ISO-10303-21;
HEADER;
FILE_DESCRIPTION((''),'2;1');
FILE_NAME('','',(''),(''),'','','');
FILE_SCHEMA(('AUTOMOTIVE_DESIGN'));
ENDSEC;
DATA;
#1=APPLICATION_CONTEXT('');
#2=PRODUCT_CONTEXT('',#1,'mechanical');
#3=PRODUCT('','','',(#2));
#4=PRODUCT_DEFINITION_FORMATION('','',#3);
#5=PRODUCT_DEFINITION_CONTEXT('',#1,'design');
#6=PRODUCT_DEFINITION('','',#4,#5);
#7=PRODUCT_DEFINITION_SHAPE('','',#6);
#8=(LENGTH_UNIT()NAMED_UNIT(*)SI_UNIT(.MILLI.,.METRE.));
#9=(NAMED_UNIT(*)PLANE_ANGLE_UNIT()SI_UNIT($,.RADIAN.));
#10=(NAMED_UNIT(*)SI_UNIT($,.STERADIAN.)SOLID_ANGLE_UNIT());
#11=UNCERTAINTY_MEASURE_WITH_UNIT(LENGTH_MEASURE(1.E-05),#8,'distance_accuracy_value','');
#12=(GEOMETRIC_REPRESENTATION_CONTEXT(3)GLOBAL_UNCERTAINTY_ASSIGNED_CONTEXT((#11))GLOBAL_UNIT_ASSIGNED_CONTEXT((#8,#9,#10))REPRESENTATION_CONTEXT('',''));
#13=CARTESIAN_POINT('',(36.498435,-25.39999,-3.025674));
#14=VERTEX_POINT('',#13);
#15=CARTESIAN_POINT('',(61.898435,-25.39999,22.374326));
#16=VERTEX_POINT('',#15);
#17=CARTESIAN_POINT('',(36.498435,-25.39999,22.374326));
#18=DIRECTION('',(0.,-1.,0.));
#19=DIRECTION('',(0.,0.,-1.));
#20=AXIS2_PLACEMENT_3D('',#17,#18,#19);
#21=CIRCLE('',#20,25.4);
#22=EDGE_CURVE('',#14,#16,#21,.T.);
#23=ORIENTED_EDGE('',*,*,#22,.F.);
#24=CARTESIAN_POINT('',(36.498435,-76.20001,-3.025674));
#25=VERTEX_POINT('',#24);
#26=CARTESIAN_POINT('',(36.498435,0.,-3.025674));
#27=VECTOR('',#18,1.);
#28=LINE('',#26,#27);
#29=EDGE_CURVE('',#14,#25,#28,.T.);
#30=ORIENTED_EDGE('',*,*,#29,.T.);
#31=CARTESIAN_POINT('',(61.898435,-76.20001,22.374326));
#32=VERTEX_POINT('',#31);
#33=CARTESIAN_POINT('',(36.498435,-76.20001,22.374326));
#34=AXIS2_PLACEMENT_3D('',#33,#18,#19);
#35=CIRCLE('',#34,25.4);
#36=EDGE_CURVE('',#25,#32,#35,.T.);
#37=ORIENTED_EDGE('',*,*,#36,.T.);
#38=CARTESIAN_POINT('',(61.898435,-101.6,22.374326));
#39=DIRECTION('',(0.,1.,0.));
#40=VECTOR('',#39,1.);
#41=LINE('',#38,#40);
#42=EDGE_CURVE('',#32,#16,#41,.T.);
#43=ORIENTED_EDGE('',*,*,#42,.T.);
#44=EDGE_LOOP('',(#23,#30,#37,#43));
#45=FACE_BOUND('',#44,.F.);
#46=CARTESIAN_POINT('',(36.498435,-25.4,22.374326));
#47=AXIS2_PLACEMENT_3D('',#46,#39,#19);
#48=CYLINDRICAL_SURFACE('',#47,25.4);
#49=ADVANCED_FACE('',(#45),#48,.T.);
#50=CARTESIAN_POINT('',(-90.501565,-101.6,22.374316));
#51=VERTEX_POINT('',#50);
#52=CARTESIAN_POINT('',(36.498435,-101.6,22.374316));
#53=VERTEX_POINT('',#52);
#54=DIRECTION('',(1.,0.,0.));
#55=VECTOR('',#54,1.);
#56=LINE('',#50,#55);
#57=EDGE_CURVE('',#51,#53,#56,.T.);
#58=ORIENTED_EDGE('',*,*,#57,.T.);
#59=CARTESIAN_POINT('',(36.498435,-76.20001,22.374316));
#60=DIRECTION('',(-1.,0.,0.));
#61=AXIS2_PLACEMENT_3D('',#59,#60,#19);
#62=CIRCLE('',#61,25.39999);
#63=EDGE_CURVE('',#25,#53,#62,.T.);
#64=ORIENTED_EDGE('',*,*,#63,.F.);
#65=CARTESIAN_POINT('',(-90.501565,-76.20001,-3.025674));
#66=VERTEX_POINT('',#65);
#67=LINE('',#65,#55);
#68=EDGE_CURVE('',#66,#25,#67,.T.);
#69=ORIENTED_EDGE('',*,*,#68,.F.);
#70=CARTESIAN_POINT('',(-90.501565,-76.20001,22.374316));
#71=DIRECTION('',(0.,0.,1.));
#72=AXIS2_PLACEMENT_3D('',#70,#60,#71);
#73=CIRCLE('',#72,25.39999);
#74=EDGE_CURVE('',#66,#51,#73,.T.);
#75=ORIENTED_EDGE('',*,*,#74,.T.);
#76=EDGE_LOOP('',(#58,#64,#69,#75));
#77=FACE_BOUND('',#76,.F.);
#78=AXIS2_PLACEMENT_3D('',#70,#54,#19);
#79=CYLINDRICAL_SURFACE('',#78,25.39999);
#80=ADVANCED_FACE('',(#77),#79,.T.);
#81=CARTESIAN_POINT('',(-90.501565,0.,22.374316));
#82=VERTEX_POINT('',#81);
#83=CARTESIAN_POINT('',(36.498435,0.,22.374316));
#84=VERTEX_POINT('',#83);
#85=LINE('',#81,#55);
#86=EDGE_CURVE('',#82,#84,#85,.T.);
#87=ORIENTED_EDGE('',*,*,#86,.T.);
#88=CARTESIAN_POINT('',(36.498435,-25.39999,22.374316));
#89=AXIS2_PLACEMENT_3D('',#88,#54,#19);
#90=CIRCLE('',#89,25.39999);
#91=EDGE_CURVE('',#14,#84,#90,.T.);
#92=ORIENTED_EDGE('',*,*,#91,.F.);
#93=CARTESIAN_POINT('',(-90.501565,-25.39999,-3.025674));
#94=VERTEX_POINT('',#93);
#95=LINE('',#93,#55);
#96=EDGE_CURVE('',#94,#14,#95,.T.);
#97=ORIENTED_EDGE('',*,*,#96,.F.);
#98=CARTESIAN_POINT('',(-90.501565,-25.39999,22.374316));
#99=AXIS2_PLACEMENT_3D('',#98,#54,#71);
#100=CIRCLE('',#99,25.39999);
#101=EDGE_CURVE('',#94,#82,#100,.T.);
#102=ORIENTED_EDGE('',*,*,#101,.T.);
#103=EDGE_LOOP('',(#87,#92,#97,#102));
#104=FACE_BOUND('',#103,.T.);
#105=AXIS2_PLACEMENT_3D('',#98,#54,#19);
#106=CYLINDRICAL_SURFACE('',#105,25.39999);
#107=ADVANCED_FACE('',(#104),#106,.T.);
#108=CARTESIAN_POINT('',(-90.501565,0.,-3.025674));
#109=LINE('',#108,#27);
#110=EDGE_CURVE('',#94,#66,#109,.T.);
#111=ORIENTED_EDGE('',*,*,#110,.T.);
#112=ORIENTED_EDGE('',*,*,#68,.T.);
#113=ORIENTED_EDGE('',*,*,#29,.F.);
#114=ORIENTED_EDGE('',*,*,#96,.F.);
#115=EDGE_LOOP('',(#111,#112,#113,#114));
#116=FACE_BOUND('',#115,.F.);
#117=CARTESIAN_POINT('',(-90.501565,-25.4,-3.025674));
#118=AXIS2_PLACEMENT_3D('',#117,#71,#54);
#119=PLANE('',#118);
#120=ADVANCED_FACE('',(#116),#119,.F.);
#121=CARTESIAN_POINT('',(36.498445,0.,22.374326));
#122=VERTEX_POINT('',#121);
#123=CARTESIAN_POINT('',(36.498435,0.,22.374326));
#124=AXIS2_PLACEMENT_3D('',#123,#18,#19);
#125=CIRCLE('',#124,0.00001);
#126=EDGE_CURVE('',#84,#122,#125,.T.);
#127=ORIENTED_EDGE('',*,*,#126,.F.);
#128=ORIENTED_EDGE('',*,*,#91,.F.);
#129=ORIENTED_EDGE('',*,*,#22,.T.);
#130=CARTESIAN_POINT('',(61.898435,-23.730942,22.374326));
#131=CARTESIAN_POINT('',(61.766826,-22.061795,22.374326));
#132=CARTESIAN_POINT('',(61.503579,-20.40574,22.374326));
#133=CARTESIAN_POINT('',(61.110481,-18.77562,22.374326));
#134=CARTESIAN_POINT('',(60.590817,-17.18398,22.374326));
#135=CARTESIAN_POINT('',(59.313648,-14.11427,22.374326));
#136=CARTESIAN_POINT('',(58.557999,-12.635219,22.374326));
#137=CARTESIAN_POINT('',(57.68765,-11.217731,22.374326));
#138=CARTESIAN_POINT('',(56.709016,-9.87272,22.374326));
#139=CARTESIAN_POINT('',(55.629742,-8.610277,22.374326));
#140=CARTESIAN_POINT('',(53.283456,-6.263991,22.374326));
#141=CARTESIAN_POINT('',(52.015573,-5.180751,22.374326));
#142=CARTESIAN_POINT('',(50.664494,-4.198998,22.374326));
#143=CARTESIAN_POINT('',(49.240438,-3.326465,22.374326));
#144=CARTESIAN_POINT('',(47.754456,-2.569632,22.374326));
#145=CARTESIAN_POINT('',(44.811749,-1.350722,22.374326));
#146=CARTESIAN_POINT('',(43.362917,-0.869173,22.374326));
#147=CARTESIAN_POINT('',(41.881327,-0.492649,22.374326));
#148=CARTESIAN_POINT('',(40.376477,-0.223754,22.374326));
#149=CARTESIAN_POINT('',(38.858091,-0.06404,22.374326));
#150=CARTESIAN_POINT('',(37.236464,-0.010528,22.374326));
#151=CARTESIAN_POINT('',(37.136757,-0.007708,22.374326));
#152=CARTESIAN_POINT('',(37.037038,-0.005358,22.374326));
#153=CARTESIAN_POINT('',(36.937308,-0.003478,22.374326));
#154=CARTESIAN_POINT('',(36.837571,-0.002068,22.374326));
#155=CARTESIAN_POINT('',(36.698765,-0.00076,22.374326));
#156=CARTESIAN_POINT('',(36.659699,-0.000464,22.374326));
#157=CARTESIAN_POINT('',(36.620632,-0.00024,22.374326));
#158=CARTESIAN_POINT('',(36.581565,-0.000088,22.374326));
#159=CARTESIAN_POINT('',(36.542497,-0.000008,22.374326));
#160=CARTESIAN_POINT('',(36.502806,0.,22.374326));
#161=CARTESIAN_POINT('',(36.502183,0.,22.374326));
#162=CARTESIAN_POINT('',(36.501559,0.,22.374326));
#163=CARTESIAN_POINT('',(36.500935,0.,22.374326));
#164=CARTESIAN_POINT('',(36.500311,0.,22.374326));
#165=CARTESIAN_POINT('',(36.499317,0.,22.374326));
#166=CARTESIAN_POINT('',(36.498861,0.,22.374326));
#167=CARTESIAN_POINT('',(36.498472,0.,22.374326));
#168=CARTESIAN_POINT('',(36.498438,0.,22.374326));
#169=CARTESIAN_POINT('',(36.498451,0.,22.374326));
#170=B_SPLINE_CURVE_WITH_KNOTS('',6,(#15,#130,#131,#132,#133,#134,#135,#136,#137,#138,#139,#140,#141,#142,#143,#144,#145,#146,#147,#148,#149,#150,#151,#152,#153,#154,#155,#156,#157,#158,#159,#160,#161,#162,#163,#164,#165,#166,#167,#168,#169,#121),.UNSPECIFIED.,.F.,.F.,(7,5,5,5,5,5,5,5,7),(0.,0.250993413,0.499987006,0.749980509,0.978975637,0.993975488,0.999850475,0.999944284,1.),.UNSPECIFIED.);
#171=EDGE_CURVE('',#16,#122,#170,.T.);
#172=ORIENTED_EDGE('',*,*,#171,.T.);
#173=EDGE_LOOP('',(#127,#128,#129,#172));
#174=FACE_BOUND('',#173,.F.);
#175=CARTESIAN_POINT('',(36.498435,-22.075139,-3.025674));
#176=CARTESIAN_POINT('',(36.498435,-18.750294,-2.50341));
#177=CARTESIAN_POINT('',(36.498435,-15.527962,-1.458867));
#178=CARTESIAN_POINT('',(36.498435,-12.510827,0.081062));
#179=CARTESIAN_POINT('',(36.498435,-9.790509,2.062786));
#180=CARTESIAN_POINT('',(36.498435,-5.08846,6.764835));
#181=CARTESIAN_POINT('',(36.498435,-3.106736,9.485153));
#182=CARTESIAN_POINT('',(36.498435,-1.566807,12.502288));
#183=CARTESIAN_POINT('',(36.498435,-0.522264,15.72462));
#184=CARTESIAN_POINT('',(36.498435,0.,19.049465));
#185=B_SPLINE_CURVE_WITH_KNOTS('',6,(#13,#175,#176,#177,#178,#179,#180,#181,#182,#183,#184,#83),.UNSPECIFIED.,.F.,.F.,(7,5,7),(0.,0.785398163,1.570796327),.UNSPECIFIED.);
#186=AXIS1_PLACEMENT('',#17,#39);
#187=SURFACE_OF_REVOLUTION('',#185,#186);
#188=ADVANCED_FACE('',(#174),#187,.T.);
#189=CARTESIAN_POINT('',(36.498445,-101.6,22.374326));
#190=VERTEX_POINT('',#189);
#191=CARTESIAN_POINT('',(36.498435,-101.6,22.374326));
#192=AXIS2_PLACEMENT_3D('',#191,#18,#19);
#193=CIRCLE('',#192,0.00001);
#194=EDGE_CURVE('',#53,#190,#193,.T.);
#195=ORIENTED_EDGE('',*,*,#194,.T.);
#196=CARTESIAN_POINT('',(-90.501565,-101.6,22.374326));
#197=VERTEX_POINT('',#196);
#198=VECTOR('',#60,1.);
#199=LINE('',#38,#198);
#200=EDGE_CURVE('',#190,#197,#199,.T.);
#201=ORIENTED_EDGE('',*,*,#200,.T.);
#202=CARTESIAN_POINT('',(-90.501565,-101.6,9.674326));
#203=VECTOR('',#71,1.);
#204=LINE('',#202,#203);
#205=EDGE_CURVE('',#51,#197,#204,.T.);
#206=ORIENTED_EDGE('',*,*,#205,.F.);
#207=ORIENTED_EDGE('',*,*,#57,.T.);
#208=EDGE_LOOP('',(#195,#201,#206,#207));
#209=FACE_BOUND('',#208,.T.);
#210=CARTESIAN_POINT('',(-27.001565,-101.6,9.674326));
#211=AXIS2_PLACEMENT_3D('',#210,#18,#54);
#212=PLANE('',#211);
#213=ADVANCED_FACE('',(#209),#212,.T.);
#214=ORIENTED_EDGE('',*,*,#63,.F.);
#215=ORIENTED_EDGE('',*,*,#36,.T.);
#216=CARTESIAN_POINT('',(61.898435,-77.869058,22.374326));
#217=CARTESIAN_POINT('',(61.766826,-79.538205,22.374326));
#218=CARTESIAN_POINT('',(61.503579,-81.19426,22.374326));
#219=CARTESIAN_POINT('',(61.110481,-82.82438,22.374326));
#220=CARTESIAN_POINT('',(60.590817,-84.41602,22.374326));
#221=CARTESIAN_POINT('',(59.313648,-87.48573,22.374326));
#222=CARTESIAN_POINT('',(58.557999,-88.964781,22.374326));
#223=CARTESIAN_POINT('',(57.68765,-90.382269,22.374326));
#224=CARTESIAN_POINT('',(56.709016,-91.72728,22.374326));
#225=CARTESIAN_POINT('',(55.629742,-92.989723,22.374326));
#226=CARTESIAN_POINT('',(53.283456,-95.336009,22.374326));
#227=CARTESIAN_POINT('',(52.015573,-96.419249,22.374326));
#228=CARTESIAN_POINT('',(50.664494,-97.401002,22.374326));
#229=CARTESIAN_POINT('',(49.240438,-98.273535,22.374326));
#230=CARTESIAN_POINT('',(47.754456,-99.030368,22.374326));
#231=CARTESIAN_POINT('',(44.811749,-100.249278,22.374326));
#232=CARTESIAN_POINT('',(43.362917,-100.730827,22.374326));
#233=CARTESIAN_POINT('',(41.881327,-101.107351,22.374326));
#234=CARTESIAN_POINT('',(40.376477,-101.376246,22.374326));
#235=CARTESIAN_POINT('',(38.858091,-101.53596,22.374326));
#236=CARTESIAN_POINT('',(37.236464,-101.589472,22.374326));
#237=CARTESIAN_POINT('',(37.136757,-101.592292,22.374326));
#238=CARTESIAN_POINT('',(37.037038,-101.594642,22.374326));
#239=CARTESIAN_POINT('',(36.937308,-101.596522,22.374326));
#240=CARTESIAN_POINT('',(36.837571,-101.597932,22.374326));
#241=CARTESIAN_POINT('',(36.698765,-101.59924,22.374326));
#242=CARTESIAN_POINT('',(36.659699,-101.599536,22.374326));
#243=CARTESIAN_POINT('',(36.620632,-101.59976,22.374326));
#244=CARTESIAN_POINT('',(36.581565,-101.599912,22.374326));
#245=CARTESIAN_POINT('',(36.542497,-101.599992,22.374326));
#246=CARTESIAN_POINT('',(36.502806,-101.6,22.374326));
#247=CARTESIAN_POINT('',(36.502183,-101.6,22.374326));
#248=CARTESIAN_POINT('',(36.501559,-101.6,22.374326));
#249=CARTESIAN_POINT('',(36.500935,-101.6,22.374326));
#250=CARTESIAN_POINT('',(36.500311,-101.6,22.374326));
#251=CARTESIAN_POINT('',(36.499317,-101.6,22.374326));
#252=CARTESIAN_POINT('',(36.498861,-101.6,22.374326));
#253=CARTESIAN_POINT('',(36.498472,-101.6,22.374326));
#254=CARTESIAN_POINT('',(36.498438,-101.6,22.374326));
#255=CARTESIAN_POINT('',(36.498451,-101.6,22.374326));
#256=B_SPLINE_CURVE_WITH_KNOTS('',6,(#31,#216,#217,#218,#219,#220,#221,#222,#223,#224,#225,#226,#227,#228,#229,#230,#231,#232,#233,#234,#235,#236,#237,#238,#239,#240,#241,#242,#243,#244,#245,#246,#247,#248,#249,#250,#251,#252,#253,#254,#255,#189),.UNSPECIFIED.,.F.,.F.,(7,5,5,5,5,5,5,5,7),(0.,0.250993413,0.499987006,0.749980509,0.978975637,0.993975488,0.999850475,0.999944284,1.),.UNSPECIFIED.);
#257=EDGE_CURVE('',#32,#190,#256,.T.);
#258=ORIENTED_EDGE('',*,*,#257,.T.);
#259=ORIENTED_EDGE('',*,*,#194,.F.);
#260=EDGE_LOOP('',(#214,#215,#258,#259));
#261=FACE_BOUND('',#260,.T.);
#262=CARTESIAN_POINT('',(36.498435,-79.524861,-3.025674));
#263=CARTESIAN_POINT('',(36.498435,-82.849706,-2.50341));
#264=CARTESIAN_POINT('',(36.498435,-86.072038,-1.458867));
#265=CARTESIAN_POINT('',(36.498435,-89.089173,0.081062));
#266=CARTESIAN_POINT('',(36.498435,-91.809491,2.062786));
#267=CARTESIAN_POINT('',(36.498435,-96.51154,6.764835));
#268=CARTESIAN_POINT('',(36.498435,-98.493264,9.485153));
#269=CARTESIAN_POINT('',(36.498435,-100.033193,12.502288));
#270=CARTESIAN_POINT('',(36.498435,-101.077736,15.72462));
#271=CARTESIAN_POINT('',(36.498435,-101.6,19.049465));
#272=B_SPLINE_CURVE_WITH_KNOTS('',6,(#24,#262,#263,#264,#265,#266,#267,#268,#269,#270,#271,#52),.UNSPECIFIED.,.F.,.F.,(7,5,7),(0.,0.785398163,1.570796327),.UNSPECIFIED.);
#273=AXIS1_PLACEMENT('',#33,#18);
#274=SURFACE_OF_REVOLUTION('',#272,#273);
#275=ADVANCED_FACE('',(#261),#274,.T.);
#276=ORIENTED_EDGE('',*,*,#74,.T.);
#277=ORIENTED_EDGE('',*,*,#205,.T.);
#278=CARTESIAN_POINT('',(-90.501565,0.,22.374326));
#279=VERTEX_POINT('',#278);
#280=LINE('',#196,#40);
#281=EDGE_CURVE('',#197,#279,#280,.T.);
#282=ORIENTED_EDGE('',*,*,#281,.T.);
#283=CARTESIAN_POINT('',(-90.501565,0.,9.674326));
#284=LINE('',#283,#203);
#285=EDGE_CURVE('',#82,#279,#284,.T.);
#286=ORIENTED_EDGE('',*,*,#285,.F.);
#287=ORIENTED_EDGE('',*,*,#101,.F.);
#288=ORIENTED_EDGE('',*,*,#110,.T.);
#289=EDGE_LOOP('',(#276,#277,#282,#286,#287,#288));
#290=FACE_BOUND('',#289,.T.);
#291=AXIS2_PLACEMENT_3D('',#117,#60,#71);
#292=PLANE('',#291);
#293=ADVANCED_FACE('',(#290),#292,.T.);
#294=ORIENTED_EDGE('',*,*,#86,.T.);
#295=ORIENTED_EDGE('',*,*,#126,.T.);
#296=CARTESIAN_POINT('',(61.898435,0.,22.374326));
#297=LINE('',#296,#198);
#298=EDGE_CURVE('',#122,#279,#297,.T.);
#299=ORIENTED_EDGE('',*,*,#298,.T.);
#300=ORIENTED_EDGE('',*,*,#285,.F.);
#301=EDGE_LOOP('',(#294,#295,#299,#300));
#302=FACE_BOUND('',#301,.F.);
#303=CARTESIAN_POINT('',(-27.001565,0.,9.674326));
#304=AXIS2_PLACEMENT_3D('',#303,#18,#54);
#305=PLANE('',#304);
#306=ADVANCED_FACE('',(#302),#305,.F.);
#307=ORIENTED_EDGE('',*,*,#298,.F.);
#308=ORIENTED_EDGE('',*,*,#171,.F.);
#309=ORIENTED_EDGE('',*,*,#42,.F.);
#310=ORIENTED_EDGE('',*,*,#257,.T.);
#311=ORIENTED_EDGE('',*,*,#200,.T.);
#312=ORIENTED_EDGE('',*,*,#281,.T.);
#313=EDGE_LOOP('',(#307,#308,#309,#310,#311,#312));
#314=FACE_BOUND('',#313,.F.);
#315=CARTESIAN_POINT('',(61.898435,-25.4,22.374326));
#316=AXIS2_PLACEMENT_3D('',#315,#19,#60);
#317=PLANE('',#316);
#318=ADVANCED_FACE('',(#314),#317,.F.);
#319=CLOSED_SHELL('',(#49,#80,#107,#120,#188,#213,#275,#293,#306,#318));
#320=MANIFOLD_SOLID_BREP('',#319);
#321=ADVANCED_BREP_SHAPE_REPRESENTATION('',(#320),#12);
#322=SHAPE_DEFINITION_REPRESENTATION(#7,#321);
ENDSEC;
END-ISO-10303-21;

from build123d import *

# Parameters (mm, degrees)
F0_W     = 127
F0_H     = 25.4
F1_DEPTH = 25.4
F2_DEPTH = 76.2
F3_R     = 25.39999
F4_R     = 25.39999


# Not quite as in the source:
# - a fillet or chamfer is up to 0.001 mm smaller than in the source, because OpenCascade refuses the exact size


with BuildPart() as f1:
    # F0 (on Front) → F1 (new body)
    with BuildSketch(Plane.XZ):
        with Locations((-27.0015653223, 9.674326013)):
            Rectangle(F0_W, F0_H)
        with BuildLine():
            Line((61.8984346777, 22.374326013), (36.4984346777, 22.374326013))
            Line((36.4984346777, 22.374326013), (36.4984346777, -3.025673987))
            ThreePointArc((36.4984346777, -3.025673987), (54.4589469199, 4.4138137708), (61.8984346777, 22.374326013))
        make_face()
    extrude(amount=F1_DEPTH)

    # F2 (add): a face of the model
    f2_faces = [f1.faces().sort_by_distance(p)[0] for p in [
        (-16.9176526174, -25.4, 9.9349632182),
    ]]
    extrude(f2_faces, amount=F2_DEPTH)

    # F3 (radius 25.4 in the source; OpenCascade refuses exactly that, so slightly less here)
    f3_edges = [f1.edges().sort_by_distance(p)[0] for p in [
        (-27.001565, -101.6, -3.025674),
    ]]
    fillet(f3_edges, radius=F3_R)

    # F4 (radius 25.4 in the source; OpenCascade refuses exactly that, so slightly less here)
    f4_edges = [f1.edges().sort_by_distance(p)[0] for p in [
        (-27.001565, 0, -3.025674),
    ]]
    fillet(f4_edges, radius=F4_R)


solid = f1.part
